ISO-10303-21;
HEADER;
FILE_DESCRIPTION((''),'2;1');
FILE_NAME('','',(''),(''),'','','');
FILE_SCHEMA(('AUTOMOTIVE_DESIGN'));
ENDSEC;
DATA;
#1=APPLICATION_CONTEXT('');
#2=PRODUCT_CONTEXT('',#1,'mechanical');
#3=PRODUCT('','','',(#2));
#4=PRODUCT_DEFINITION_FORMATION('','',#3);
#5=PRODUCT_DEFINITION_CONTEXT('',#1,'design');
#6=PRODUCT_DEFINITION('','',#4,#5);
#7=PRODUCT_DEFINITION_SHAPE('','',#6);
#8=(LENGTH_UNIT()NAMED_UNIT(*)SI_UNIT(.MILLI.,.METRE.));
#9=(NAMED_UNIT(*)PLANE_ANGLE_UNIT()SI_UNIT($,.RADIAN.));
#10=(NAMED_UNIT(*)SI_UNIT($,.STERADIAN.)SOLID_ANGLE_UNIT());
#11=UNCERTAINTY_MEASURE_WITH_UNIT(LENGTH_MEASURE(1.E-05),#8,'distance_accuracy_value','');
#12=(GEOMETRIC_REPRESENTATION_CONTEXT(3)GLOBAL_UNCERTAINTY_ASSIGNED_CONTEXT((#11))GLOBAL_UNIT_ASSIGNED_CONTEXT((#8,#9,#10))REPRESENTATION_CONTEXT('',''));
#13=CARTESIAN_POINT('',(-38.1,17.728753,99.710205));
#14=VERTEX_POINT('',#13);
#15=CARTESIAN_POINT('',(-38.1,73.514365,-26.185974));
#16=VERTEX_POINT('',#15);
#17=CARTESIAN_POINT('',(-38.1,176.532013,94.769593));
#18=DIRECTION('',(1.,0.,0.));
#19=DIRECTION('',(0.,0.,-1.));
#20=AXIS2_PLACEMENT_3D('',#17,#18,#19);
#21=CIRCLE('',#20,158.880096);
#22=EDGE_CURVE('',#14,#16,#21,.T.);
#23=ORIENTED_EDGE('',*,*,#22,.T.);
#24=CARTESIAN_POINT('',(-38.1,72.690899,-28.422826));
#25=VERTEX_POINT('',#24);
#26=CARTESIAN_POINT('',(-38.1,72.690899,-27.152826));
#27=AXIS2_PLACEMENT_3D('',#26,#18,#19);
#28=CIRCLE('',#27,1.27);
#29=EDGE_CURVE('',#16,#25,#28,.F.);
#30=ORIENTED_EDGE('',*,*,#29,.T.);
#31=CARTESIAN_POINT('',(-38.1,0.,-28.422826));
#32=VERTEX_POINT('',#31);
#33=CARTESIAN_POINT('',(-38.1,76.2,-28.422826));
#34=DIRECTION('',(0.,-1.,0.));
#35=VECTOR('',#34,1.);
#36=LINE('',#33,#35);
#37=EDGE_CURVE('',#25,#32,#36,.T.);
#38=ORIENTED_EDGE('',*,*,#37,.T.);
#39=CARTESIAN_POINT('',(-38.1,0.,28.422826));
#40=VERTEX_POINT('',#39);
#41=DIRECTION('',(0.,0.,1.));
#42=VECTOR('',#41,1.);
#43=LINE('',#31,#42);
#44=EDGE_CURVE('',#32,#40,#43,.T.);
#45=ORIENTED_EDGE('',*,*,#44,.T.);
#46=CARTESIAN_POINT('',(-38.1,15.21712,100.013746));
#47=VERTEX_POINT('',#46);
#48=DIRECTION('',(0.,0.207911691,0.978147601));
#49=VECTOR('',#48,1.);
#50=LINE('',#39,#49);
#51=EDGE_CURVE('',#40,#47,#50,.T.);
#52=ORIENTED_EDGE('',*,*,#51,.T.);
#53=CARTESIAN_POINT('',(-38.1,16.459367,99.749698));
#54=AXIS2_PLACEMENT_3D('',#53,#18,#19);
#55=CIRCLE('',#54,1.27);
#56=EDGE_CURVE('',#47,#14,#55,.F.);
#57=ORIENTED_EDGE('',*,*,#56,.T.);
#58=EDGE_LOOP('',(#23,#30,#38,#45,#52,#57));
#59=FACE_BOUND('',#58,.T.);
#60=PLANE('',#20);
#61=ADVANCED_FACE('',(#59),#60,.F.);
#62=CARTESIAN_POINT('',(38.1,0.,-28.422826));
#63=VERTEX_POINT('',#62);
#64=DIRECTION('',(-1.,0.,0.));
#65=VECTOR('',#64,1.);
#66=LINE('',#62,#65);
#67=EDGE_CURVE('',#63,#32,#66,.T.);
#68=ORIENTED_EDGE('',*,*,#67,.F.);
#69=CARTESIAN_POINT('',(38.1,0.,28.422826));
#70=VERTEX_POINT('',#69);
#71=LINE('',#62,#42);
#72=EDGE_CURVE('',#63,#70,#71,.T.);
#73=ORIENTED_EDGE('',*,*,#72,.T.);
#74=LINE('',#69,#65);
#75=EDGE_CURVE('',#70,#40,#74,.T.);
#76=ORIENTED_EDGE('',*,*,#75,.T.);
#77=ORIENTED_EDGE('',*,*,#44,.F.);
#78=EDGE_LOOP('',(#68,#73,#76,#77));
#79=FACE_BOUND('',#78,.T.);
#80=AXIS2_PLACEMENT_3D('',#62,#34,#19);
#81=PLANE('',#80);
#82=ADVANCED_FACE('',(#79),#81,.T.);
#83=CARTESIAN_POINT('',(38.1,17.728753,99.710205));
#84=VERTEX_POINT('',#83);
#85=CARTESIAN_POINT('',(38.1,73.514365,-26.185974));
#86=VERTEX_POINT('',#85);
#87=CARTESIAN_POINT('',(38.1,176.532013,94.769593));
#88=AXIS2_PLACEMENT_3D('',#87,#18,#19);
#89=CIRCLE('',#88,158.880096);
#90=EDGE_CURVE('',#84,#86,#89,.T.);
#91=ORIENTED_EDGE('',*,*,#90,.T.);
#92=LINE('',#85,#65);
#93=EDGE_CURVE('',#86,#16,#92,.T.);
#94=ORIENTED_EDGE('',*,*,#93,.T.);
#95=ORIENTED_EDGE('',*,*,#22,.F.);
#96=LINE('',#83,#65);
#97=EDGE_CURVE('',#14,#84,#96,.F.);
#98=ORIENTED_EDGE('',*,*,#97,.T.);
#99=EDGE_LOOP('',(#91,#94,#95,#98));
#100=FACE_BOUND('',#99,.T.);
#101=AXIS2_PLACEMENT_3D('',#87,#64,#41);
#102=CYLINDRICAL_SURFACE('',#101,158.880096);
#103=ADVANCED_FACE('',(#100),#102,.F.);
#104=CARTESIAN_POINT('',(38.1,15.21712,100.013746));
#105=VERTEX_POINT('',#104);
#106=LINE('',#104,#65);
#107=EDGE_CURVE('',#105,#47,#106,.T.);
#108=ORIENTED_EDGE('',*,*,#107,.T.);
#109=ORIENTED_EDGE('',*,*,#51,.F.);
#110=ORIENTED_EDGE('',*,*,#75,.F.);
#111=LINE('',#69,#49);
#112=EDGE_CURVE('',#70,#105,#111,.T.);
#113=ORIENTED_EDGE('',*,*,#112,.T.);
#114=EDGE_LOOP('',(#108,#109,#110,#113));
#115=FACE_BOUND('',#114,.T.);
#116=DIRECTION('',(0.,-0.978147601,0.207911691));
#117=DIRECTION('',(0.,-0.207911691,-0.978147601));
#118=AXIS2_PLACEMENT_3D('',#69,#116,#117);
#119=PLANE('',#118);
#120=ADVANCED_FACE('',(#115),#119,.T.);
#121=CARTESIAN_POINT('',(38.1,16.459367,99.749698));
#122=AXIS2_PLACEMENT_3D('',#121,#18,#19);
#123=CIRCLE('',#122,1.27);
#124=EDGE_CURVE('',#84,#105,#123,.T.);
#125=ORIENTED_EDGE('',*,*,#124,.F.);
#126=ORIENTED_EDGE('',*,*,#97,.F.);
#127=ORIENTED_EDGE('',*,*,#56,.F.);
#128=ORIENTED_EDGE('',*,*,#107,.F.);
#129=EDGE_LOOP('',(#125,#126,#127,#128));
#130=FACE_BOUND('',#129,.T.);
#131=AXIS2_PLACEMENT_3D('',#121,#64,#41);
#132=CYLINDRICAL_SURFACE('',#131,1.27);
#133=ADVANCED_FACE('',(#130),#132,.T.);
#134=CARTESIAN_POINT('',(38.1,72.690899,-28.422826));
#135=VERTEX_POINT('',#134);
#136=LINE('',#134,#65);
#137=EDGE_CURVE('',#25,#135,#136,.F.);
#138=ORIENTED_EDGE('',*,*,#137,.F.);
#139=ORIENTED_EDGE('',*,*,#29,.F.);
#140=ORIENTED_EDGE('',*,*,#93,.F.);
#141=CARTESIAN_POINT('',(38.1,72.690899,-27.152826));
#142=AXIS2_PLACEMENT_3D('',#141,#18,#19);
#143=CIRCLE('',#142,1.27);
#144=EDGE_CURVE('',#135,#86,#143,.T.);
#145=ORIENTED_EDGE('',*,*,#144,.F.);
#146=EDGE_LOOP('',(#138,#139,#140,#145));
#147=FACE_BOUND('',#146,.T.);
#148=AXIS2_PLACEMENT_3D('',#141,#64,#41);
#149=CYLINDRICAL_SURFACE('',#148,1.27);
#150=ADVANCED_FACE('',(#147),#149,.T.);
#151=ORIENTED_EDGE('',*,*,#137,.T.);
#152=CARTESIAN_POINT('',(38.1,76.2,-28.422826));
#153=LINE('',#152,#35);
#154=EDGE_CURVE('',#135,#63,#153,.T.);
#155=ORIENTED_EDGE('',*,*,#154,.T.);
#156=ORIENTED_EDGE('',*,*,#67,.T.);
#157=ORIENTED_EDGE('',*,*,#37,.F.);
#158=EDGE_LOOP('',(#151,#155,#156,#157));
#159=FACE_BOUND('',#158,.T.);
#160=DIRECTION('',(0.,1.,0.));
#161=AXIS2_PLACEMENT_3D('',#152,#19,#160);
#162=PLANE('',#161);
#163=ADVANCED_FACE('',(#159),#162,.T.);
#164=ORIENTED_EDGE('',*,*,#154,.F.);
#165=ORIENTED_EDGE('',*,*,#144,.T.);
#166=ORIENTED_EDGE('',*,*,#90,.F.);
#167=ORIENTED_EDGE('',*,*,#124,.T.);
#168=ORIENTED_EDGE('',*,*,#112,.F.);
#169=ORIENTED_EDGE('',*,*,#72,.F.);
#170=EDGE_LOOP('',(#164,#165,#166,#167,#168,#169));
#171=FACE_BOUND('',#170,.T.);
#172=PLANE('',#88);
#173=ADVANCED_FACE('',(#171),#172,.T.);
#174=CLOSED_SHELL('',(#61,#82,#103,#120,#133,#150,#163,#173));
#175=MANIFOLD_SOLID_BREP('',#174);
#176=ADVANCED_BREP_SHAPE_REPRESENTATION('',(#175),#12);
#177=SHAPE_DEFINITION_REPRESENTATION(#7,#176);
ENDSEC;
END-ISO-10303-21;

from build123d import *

# Parameters (mm, degrees)
BOSS_EXTRUDE1_DEPTH = 38.1
FILLET1_R           = 1.27


with BuildPart() as part:
    # Sketch1 → Boss-Extrude1 (new, symmetric)
    with BuildSketch(Plane(origin=(0, 0, 0), x_dir=(0, 0, -1), z_dir=(1, 0, 0))):
        with BuildLine():
            Line((28.422826333, 0), (-28.422826333, 0))
            Line((-28.422826333, 0), (-127.802622568, 21.123827787))
            ThreePointArc((-127.802622568, 21.123827787), (-41.944172269, 26.690897226), (28.422826333, 76.2))
            Line((28.422826333, 76.2), (28.422826333, 0))
        make_face()
    extrude(amount=BOSS_EXTRUDE1_DEPTH, both=True)

    # Fillet1
    fillet1_edges = [part.edges().sort_by_distance(p)[0] for p in [
        (0, 76.2, -28.422826333),
    ]]
    fillet(fillet1_edges, radius=FILLET1_R)
    fillet1_2_edges = [part.edges().sort_by_distance(p)[0] for p in [
        (0, 21.123827787, 127.802622568),
    ]]
    fillet(fillet1_2_edges, radius=FILLET1_R)


solid = part.part
